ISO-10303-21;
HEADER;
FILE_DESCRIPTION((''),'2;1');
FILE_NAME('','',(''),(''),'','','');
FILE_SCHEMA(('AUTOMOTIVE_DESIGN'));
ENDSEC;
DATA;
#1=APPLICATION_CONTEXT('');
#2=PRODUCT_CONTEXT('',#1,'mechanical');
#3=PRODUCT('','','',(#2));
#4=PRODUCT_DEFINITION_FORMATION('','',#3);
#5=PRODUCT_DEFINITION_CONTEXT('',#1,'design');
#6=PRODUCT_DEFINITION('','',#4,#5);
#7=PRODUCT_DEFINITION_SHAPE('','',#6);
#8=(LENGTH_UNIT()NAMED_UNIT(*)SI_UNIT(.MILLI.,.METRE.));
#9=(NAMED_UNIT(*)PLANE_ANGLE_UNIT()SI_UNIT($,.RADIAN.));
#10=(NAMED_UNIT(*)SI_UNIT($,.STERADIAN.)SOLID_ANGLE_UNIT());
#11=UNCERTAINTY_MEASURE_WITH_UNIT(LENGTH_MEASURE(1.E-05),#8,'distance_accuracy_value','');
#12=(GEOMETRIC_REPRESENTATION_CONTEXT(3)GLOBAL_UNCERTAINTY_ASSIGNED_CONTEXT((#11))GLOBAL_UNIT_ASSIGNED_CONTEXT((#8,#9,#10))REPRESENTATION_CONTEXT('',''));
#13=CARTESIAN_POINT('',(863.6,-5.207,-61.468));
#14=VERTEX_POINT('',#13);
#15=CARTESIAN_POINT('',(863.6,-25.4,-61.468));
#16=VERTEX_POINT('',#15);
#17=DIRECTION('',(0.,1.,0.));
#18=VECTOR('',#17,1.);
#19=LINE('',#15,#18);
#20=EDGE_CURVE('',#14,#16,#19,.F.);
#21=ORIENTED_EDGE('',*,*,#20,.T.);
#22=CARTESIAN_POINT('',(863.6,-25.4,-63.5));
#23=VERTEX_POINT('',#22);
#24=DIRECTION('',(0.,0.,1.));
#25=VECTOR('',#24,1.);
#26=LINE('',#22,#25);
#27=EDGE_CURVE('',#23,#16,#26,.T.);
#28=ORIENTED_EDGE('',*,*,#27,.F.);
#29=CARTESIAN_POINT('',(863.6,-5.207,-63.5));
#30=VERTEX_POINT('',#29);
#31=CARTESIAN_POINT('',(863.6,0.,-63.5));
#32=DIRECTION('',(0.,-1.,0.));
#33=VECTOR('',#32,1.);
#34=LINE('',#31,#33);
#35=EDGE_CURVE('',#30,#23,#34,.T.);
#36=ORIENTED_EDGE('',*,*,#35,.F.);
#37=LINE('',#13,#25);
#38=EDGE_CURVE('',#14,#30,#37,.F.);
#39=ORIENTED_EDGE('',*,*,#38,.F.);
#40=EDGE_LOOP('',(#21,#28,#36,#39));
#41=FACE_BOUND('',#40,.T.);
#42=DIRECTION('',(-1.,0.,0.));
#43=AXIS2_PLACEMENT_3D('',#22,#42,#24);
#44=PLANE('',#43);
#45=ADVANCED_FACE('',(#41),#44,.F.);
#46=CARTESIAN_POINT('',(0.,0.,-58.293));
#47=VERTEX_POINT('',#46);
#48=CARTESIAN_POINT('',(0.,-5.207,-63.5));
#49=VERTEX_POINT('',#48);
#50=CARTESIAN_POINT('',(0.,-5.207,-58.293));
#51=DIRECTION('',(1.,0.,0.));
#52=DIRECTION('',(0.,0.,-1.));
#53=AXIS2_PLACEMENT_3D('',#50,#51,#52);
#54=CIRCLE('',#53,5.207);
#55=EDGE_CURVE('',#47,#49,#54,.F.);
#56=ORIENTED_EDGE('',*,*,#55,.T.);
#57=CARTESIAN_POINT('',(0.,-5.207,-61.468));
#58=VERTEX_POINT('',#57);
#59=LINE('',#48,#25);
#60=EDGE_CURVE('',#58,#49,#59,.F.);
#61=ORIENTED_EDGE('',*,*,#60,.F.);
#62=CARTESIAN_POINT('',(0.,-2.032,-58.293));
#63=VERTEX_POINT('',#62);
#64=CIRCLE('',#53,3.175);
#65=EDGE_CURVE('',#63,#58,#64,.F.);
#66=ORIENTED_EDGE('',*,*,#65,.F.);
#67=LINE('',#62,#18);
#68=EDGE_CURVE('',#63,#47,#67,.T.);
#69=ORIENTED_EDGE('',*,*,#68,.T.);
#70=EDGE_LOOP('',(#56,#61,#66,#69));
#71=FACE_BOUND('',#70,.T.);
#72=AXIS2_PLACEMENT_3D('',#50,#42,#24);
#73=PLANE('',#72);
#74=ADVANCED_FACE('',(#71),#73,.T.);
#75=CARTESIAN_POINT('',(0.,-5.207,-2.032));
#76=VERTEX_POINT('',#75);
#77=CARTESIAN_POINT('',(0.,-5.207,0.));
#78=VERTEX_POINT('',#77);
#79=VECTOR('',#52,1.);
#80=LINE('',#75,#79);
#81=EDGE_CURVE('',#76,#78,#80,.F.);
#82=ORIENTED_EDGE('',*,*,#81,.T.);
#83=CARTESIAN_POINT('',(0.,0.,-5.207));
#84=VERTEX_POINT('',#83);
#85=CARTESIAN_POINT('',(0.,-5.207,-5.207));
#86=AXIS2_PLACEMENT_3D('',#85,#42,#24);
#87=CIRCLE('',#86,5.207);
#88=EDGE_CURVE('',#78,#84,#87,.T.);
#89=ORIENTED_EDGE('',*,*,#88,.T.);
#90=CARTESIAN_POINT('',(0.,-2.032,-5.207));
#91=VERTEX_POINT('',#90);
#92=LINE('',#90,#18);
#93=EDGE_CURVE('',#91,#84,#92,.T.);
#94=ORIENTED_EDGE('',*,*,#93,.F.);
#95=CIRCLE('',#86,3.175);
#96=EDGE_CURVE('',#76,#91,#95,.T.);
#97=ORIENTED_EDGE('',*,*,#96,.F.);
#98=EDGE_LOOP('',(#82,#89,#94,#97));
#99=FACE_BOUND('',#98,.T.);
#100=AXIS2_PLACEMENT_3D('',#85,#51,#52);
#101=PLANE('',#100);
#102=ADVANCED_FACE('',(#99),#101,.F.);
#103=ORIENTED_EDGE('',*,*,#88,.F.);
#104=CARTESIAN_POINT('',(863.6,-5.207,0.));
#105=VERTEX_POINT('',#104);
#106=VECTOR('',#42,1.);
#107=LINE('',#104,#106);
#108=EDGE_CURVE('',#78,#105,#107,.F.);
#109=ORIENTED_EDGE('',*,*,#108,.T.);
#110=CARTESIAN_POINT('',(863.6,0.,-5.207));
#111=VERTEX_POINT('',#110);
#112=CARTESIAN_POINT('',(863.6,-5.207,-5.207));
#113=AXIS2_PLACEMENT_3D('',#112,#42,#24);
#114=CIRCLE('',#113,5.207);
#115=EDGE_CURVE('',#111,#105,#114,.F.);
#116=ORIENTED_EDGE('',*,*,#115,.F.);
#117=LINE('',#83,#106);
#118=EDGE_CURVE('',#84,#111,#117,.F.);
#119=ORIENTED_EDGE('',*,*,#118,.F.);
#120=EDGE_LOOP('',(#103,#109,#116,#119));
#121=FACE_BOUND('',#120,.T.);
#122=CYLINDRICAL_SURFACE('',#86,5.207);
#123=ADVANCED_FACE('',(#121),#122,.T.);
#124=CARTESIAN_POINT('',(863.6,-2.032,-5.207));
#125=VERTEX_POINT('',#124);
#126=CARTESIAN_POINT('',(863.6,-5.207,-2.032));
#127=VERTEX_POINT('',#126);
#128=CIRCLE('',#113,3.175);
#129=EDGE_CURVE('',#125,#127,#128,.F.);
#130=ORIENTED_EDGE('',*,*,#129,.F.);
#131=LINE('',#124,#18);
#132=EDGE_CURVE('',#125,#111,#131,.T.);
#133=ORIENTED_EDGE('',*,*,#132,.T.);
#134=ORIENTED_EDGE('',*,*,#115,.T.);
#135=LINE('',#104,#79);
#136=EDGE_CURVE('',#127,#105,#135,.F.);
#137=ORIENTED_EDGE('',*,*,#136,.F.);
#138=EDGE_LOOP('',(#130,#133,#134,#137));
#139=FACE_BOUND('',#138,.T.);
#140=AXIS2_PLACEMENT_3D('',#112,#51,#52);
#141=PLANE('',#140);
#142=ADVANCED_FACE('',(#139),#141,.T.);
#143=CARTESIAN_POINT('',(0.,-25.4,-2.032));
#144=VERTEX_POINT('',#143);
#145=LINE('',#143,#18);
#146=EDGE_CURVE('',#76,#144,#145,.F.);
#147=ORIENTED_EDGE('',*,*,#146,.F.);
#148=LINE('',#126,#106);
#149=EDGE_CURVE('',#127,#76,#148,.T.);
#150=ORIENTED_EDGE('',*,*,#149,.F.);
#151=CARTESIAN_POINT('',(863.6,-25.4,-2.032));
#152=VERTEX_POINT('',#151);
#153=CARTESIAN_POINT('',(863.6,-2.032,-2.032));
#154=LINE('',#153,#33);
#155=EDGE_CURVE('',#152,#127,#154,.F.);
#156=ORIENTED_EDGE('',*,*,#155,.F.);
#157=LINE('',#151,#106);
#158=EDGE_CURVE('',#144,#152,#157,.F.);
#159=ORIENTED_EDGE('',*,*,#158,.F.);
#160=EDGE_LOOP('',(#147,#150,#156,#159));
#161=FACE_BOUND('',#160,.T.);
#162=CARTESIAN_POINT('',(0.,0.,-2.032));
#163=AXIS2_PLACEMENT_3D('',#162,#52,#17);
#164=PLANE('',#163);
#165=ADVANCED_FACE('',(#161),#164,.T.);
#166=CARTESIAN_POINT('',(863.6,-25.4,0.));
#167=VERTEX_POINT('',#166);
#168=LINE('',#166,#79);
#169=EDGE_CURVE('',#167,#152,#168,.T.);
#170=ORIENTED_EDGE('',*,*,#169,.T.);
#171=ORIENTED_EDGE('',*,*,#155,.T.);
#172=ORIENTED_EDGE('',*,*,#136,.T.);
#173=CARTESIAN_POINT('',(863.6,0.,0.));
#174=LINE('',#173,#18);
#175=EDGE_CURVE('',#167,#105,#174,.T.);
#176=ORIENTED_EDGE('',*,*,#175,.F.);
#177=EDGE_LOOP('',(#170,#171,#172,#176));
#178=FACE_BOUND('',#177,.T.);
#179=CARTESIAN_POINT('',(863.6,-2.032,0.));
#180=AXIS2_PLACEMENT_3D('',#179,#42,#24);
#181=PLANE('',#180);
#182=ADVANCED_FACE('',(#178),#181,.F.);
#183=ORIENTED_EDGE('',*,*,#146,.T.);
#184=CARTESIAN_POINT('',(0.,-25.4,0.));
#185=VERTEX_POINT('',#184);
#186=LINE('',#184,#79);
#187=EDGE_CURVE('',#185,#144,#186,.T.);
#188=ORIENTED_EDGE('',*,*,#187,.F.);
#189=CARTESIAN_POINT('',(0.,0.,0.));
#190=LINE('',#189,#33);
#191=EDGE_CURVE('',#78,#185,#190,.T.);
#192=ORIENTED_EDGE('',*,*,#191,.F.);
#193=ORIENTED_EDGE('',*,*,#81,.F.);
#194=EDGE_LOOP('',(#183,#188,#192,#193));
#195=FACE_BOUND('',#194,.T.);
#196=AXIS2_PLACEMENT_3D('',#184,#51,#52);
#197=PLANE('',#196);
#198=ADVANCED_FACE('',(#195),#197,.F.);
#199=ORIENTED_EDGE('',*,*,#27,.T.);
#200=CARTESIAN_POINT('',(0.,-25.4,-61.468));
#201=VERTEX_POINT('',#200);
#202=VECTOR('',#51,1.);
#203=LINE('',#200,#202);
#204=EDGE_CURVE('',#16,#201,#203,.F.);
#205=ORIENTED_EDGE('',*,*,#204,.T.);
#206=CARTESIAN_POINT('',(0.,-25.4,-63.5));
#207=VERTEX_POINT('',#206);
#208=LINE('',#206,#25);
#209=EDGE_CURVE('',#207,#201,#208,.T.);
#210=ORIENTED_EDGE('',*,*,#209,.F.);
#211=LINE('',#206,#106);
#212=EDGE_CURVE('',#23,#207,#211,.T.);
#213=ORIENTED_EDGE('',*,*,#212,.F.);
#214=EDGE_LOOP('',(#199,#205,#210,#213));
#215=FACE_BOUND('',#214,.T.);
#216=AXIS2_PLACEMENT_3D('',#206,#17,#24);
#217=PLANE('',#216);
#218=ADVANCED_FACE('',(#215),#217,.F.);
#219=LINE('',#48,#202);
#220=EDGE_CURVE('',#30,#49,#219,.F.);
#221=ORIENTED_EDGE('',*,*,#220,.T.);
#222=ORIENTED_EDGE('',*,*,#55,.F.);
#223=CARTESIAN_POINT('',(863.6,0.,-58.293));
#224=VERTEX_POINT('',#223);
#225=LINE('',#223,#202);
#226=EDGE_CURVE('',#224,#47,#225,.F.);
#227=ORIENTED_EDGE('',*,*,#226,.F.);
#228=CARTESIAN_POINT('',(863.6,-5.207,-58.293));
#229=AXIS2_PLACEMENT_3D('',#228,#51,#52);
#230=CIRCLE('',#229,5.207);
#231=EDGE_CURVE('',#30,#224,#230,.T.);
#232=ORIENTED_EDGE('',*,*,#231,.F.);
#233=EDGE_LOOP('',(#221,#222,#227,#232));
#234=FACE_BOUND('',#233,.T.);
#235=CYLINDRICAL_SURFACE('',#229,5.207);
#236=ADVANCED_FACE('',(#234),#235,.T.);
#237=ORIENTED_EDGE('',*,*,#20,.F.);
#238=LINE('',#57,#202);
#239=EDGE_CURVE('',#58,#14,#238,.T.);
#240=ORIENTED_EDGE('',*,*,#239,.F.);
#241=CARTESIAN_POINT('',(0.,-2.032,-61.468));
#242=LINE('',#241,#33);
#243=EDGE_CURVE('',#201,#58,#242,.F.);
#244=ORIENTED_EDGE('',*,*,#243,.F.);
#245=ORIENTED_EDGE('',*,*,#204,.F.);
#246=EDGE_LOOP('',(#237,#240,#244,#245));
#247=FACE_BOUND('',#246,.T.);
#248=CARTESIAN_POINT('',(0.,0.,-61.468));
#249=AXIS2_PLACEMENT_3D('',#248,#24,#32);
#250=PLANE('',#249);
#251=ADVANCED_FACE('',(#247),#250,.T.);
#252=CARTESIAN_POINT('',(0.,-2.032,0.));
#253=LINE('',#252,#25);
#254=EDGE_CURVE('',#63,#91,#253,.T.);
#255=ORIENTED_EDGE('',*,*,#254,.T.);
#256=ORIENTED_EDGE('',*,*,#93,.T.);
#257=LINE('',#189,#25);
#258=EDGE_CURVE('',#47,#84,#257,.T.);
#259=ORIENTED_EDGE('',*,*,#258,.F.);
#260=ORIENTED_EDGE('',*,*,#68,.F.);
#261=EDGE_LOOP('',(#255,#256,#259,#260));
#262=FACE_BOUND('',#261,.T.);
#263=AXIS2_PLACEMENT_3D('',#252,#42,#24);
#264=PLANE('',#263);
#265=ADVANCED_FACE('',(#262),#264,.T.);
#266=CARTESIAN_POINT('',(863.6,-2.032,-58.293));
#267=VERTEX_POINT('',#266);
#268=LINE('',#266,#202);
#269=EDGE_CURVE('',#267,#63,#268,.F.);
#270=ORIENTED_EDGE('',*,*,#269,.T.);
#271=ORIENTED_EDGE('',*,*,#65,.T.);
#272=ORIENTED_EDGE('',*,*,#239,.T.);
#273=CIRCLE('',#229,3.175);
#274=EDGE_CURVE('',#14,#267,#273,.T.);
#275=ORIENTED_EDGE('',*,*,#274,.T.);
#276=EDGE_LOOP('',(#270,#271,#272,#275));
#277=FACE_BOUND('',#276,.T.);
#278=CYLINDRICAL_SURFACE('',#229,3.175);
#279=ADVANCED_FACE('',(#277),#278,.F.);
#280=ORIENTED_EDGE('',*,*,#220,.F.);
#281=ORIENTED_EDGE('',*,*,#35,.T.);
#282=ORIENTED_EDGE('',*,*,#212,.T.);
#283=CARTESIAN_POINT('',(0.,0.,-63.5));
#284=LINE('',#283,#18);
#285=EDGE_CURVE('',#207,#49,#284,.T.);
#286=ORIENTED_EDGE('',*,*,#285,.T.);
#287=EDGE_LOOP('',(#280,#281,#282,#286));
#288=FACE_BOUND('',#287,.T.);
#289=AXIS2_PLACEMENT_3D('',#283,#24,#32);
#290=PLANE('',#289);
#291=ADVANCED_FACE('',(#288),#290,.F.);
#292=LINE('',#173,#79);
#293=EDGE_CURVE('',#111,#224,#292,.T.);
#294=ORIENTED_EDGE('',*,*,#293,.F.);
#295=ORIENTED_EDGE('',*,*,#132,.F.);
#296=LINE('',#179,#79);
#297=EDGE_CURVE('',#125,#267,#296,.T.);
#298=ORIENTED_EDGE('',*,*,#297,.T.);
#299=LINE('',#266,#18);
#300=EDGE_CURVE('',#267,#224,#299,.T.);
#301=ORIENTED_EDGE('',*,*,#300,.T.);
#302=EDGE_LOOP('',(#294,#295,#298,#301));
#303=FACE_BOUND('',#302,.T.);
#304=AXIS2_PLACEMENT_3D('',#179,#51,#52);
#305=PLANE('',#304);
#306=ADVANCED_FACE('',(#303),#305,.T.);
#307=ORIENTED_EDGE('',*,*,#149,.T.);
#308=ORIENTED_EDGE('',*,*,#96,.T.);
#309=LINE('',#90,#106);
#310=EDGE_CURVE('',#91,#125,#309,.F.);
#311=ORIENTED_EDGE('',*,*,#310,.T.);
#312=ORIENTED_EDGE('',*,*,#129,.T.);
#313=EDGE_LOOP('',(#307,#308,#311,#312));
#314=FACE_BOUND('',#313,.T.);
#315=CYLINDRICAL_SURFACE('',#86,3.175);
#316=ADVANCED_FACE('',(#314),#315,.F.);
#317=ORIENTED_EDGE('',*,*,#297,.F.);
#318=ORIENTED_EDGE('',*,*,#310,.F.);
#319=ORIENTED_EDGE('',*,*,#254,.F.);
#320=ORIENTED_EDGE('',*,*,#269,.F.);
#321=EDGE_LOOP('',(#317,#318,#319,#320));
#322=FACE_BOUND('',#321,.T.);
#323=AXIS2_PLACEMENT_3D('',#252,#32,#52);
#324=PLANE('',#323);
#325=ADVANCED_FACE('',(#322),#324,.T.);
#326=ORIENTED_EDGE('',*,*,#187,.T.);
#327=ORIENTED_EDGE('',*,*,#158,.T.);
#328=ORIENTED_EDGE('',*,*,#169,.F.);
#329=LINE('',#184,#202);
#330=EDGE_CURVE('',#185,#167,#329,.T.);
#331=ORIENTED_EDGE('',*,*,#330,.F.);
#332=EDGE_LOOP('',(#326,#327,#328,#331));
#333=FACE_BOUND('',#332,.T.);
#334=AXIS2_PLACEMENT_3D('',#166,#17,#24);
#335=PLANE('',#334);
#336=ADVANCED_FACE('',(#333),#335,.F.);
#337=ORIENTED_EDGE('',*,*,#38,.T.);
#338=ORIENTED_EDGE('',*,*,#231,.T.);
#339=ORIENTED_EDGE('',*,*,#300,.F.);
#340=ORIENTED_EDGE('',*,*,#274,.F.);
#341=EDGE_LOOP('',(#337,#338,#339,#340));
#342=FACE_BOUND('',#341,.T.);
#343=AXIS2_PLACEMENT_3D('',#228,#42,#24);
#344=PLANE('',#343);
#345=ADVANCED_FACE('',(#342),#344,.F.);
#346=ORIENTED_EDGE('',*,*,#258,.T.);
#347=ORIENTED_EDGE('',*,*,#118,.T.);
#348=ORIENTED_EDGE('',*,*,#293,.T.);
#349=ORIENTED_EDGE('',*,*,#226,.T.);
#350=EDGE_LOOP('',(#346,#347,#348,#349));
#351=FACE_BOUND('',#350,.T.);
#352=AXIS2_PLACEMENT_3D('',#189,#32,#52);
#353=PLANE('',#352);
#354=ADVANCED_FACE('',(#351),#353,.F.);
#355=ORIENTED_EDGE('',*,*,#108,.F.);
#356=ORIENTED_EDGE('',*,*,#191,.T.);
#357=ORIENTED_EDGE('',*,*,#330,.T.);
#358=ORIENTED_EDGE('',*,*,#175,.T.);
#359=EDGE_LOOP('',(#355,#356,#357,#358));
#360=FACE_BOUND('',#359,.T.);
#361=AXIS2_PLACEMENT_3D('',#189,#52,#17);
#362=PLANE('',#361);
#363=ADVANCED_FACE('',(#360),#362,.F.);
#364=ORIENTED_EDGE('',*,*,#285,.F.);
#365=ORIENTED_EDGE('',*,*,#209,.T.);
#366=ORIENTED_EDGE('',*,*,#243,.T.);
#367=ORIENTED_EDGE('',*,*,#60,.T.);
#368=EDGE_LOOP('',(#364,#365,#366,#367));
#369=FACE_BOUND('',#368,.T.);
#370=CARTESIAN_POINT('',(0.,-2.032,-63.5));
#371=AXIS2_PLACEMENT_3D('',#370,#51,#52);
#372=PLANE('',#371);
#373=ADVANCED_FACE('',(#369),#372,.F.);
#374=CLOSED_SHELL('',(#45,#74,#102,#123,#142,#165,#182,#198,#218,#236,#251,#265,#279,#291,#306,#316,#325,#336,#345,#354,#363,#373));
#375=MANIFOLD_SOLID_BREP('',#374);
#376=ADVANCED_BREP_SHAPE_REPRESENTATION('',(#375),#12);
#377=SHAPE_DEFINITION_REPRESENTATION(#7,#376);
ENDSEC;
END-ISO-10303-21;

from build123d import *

# Parameters (mm, degrees)
SKETCH1_W                      = 863.6
SKETCH1_H                      = 63.5
BASE_FLANGE1_DEPTH             = 2.032
EDGE_FLANGE1_STRIP_W           = 14.478
EDGE_FLANGE1_STRIP_H           = 2.032
EDGE_FLANGE1_STRIP_CUT_DEPTH   = 863.6
EDGE_FLANGE1_STRIP_2_W         = 14.478
EDGE_FLANGE1_STRIP_2_H         = 2.032
EDGE_FLANGE1_STRIP_CUT_2_DEPTH = 863.6
EDGE_FLANGE1_DEPTH             = 863.6
EDGE_FLANGE1_BEND_DEPTH        = 863.6


# Sheet-metal steps are written as plain solids
with BuildPart() as part:
    # Sketch1 → Base-Flange1 (new body)
    with BuildSketch(Plane(origin=(0, 0, 0), x_dir=(1, 0, 0), z_dir=(0, 1, 0))):
        with Locations((431.8, 31.75)):
            Rectangle(SKETCH1_W, SKETCH1_H)
    extrude(amount=-BASE_FLANGE1_DEPTH)

    # Edge-Flange1 strip (across the edge) → Edge-Flange1 strip cut (cut)
    with BuildSketch(Plane(origin=(863.6, -2.032, 0), x_dir=(0, 0, -1), z_dir=(-1, 0, 0))):
        with Locations((-2.032, -1.016)):
            Rectangle(EDGE_FLANGE1_STRIP_W, EDGE_FLANGE1_STRIP_H)
    extrude(amount=EDGE_FLANGE1_STRIP_CUT_DEPTH, mode=Mode.SUBTRACT)

    # Edge-Flange1 strip 2 (across the edge) → Edge-Flange1 strip cut 2 (cut)
    with BuildSketch(Plane(origin=(0, -2.032, -63.5), x_dir=(0, 0, 1), z_dir=(1, 0, 0))):
        with Locations((-2.032, -1.016)):
            Rectangle(EDGE_FLANGE1_STRIP_2_W, EDGE_FLANGE1_STRIP_2_H)
    extrude(amount=EDGE_FLANGE1_STRIP_CUT_2_DEPTH, mode=Mode.SUBTRACT)

    # Edge-Flange1 section (across the edge) → Edge-Flange1 (add)
    with BuildSketch(Plane(origin=(863.6, -2.032, 0), x_dir=(0, 0, -1), z_dir=(-1, 0, 0))):
        with BuildLine():
            Line((0, 3.175), (0, 23.368))
            Line((0, 23.368), (2.032, 23.368))
            Line((2.032, 23.368), (2.032, 3.175))
            ThreePointArc((2.032, 3.175), (2.96193597, 0.92993597), (5.207, 0))
            Line((5.207, 0), (5.207, -2.032))
            ThreePointArc((5.207, -2.032), (1.52509499, -0.50690501), (0, 3.175))
        make_face()
    extrude(amount=EDGE_FLANGE1_DEPTH)

    # Edge-Flange1 section 2 (across the edge) → Edge-Flange1 bend (add)
    with BuildSketch(Plane(origin=(0, -2.032, -63.5), x_dir=(0, 0, 1), z_dir=(1, 0, 0))):
        with BuildLine():
            Line((0, 3.175), (0, 23.368))
            Line((0, 23.368), (2.032, 23.368))
            Line((2.032, 23.368), (2.032, 3.175))
            ThreePointArc((2.032, 3.175), (2.96193597, 0.92993597), (5.207, 0))
            Line((5.207, 0), (5.207, -2.032))
            ThreePointArc((5.207, -2.032), (1.52509499, -0.50690501), (0, 3.175))
        make_face()
    extrude(amount=EDGE_FLANGE1_BEND_DEPTH)


solid = part.part
